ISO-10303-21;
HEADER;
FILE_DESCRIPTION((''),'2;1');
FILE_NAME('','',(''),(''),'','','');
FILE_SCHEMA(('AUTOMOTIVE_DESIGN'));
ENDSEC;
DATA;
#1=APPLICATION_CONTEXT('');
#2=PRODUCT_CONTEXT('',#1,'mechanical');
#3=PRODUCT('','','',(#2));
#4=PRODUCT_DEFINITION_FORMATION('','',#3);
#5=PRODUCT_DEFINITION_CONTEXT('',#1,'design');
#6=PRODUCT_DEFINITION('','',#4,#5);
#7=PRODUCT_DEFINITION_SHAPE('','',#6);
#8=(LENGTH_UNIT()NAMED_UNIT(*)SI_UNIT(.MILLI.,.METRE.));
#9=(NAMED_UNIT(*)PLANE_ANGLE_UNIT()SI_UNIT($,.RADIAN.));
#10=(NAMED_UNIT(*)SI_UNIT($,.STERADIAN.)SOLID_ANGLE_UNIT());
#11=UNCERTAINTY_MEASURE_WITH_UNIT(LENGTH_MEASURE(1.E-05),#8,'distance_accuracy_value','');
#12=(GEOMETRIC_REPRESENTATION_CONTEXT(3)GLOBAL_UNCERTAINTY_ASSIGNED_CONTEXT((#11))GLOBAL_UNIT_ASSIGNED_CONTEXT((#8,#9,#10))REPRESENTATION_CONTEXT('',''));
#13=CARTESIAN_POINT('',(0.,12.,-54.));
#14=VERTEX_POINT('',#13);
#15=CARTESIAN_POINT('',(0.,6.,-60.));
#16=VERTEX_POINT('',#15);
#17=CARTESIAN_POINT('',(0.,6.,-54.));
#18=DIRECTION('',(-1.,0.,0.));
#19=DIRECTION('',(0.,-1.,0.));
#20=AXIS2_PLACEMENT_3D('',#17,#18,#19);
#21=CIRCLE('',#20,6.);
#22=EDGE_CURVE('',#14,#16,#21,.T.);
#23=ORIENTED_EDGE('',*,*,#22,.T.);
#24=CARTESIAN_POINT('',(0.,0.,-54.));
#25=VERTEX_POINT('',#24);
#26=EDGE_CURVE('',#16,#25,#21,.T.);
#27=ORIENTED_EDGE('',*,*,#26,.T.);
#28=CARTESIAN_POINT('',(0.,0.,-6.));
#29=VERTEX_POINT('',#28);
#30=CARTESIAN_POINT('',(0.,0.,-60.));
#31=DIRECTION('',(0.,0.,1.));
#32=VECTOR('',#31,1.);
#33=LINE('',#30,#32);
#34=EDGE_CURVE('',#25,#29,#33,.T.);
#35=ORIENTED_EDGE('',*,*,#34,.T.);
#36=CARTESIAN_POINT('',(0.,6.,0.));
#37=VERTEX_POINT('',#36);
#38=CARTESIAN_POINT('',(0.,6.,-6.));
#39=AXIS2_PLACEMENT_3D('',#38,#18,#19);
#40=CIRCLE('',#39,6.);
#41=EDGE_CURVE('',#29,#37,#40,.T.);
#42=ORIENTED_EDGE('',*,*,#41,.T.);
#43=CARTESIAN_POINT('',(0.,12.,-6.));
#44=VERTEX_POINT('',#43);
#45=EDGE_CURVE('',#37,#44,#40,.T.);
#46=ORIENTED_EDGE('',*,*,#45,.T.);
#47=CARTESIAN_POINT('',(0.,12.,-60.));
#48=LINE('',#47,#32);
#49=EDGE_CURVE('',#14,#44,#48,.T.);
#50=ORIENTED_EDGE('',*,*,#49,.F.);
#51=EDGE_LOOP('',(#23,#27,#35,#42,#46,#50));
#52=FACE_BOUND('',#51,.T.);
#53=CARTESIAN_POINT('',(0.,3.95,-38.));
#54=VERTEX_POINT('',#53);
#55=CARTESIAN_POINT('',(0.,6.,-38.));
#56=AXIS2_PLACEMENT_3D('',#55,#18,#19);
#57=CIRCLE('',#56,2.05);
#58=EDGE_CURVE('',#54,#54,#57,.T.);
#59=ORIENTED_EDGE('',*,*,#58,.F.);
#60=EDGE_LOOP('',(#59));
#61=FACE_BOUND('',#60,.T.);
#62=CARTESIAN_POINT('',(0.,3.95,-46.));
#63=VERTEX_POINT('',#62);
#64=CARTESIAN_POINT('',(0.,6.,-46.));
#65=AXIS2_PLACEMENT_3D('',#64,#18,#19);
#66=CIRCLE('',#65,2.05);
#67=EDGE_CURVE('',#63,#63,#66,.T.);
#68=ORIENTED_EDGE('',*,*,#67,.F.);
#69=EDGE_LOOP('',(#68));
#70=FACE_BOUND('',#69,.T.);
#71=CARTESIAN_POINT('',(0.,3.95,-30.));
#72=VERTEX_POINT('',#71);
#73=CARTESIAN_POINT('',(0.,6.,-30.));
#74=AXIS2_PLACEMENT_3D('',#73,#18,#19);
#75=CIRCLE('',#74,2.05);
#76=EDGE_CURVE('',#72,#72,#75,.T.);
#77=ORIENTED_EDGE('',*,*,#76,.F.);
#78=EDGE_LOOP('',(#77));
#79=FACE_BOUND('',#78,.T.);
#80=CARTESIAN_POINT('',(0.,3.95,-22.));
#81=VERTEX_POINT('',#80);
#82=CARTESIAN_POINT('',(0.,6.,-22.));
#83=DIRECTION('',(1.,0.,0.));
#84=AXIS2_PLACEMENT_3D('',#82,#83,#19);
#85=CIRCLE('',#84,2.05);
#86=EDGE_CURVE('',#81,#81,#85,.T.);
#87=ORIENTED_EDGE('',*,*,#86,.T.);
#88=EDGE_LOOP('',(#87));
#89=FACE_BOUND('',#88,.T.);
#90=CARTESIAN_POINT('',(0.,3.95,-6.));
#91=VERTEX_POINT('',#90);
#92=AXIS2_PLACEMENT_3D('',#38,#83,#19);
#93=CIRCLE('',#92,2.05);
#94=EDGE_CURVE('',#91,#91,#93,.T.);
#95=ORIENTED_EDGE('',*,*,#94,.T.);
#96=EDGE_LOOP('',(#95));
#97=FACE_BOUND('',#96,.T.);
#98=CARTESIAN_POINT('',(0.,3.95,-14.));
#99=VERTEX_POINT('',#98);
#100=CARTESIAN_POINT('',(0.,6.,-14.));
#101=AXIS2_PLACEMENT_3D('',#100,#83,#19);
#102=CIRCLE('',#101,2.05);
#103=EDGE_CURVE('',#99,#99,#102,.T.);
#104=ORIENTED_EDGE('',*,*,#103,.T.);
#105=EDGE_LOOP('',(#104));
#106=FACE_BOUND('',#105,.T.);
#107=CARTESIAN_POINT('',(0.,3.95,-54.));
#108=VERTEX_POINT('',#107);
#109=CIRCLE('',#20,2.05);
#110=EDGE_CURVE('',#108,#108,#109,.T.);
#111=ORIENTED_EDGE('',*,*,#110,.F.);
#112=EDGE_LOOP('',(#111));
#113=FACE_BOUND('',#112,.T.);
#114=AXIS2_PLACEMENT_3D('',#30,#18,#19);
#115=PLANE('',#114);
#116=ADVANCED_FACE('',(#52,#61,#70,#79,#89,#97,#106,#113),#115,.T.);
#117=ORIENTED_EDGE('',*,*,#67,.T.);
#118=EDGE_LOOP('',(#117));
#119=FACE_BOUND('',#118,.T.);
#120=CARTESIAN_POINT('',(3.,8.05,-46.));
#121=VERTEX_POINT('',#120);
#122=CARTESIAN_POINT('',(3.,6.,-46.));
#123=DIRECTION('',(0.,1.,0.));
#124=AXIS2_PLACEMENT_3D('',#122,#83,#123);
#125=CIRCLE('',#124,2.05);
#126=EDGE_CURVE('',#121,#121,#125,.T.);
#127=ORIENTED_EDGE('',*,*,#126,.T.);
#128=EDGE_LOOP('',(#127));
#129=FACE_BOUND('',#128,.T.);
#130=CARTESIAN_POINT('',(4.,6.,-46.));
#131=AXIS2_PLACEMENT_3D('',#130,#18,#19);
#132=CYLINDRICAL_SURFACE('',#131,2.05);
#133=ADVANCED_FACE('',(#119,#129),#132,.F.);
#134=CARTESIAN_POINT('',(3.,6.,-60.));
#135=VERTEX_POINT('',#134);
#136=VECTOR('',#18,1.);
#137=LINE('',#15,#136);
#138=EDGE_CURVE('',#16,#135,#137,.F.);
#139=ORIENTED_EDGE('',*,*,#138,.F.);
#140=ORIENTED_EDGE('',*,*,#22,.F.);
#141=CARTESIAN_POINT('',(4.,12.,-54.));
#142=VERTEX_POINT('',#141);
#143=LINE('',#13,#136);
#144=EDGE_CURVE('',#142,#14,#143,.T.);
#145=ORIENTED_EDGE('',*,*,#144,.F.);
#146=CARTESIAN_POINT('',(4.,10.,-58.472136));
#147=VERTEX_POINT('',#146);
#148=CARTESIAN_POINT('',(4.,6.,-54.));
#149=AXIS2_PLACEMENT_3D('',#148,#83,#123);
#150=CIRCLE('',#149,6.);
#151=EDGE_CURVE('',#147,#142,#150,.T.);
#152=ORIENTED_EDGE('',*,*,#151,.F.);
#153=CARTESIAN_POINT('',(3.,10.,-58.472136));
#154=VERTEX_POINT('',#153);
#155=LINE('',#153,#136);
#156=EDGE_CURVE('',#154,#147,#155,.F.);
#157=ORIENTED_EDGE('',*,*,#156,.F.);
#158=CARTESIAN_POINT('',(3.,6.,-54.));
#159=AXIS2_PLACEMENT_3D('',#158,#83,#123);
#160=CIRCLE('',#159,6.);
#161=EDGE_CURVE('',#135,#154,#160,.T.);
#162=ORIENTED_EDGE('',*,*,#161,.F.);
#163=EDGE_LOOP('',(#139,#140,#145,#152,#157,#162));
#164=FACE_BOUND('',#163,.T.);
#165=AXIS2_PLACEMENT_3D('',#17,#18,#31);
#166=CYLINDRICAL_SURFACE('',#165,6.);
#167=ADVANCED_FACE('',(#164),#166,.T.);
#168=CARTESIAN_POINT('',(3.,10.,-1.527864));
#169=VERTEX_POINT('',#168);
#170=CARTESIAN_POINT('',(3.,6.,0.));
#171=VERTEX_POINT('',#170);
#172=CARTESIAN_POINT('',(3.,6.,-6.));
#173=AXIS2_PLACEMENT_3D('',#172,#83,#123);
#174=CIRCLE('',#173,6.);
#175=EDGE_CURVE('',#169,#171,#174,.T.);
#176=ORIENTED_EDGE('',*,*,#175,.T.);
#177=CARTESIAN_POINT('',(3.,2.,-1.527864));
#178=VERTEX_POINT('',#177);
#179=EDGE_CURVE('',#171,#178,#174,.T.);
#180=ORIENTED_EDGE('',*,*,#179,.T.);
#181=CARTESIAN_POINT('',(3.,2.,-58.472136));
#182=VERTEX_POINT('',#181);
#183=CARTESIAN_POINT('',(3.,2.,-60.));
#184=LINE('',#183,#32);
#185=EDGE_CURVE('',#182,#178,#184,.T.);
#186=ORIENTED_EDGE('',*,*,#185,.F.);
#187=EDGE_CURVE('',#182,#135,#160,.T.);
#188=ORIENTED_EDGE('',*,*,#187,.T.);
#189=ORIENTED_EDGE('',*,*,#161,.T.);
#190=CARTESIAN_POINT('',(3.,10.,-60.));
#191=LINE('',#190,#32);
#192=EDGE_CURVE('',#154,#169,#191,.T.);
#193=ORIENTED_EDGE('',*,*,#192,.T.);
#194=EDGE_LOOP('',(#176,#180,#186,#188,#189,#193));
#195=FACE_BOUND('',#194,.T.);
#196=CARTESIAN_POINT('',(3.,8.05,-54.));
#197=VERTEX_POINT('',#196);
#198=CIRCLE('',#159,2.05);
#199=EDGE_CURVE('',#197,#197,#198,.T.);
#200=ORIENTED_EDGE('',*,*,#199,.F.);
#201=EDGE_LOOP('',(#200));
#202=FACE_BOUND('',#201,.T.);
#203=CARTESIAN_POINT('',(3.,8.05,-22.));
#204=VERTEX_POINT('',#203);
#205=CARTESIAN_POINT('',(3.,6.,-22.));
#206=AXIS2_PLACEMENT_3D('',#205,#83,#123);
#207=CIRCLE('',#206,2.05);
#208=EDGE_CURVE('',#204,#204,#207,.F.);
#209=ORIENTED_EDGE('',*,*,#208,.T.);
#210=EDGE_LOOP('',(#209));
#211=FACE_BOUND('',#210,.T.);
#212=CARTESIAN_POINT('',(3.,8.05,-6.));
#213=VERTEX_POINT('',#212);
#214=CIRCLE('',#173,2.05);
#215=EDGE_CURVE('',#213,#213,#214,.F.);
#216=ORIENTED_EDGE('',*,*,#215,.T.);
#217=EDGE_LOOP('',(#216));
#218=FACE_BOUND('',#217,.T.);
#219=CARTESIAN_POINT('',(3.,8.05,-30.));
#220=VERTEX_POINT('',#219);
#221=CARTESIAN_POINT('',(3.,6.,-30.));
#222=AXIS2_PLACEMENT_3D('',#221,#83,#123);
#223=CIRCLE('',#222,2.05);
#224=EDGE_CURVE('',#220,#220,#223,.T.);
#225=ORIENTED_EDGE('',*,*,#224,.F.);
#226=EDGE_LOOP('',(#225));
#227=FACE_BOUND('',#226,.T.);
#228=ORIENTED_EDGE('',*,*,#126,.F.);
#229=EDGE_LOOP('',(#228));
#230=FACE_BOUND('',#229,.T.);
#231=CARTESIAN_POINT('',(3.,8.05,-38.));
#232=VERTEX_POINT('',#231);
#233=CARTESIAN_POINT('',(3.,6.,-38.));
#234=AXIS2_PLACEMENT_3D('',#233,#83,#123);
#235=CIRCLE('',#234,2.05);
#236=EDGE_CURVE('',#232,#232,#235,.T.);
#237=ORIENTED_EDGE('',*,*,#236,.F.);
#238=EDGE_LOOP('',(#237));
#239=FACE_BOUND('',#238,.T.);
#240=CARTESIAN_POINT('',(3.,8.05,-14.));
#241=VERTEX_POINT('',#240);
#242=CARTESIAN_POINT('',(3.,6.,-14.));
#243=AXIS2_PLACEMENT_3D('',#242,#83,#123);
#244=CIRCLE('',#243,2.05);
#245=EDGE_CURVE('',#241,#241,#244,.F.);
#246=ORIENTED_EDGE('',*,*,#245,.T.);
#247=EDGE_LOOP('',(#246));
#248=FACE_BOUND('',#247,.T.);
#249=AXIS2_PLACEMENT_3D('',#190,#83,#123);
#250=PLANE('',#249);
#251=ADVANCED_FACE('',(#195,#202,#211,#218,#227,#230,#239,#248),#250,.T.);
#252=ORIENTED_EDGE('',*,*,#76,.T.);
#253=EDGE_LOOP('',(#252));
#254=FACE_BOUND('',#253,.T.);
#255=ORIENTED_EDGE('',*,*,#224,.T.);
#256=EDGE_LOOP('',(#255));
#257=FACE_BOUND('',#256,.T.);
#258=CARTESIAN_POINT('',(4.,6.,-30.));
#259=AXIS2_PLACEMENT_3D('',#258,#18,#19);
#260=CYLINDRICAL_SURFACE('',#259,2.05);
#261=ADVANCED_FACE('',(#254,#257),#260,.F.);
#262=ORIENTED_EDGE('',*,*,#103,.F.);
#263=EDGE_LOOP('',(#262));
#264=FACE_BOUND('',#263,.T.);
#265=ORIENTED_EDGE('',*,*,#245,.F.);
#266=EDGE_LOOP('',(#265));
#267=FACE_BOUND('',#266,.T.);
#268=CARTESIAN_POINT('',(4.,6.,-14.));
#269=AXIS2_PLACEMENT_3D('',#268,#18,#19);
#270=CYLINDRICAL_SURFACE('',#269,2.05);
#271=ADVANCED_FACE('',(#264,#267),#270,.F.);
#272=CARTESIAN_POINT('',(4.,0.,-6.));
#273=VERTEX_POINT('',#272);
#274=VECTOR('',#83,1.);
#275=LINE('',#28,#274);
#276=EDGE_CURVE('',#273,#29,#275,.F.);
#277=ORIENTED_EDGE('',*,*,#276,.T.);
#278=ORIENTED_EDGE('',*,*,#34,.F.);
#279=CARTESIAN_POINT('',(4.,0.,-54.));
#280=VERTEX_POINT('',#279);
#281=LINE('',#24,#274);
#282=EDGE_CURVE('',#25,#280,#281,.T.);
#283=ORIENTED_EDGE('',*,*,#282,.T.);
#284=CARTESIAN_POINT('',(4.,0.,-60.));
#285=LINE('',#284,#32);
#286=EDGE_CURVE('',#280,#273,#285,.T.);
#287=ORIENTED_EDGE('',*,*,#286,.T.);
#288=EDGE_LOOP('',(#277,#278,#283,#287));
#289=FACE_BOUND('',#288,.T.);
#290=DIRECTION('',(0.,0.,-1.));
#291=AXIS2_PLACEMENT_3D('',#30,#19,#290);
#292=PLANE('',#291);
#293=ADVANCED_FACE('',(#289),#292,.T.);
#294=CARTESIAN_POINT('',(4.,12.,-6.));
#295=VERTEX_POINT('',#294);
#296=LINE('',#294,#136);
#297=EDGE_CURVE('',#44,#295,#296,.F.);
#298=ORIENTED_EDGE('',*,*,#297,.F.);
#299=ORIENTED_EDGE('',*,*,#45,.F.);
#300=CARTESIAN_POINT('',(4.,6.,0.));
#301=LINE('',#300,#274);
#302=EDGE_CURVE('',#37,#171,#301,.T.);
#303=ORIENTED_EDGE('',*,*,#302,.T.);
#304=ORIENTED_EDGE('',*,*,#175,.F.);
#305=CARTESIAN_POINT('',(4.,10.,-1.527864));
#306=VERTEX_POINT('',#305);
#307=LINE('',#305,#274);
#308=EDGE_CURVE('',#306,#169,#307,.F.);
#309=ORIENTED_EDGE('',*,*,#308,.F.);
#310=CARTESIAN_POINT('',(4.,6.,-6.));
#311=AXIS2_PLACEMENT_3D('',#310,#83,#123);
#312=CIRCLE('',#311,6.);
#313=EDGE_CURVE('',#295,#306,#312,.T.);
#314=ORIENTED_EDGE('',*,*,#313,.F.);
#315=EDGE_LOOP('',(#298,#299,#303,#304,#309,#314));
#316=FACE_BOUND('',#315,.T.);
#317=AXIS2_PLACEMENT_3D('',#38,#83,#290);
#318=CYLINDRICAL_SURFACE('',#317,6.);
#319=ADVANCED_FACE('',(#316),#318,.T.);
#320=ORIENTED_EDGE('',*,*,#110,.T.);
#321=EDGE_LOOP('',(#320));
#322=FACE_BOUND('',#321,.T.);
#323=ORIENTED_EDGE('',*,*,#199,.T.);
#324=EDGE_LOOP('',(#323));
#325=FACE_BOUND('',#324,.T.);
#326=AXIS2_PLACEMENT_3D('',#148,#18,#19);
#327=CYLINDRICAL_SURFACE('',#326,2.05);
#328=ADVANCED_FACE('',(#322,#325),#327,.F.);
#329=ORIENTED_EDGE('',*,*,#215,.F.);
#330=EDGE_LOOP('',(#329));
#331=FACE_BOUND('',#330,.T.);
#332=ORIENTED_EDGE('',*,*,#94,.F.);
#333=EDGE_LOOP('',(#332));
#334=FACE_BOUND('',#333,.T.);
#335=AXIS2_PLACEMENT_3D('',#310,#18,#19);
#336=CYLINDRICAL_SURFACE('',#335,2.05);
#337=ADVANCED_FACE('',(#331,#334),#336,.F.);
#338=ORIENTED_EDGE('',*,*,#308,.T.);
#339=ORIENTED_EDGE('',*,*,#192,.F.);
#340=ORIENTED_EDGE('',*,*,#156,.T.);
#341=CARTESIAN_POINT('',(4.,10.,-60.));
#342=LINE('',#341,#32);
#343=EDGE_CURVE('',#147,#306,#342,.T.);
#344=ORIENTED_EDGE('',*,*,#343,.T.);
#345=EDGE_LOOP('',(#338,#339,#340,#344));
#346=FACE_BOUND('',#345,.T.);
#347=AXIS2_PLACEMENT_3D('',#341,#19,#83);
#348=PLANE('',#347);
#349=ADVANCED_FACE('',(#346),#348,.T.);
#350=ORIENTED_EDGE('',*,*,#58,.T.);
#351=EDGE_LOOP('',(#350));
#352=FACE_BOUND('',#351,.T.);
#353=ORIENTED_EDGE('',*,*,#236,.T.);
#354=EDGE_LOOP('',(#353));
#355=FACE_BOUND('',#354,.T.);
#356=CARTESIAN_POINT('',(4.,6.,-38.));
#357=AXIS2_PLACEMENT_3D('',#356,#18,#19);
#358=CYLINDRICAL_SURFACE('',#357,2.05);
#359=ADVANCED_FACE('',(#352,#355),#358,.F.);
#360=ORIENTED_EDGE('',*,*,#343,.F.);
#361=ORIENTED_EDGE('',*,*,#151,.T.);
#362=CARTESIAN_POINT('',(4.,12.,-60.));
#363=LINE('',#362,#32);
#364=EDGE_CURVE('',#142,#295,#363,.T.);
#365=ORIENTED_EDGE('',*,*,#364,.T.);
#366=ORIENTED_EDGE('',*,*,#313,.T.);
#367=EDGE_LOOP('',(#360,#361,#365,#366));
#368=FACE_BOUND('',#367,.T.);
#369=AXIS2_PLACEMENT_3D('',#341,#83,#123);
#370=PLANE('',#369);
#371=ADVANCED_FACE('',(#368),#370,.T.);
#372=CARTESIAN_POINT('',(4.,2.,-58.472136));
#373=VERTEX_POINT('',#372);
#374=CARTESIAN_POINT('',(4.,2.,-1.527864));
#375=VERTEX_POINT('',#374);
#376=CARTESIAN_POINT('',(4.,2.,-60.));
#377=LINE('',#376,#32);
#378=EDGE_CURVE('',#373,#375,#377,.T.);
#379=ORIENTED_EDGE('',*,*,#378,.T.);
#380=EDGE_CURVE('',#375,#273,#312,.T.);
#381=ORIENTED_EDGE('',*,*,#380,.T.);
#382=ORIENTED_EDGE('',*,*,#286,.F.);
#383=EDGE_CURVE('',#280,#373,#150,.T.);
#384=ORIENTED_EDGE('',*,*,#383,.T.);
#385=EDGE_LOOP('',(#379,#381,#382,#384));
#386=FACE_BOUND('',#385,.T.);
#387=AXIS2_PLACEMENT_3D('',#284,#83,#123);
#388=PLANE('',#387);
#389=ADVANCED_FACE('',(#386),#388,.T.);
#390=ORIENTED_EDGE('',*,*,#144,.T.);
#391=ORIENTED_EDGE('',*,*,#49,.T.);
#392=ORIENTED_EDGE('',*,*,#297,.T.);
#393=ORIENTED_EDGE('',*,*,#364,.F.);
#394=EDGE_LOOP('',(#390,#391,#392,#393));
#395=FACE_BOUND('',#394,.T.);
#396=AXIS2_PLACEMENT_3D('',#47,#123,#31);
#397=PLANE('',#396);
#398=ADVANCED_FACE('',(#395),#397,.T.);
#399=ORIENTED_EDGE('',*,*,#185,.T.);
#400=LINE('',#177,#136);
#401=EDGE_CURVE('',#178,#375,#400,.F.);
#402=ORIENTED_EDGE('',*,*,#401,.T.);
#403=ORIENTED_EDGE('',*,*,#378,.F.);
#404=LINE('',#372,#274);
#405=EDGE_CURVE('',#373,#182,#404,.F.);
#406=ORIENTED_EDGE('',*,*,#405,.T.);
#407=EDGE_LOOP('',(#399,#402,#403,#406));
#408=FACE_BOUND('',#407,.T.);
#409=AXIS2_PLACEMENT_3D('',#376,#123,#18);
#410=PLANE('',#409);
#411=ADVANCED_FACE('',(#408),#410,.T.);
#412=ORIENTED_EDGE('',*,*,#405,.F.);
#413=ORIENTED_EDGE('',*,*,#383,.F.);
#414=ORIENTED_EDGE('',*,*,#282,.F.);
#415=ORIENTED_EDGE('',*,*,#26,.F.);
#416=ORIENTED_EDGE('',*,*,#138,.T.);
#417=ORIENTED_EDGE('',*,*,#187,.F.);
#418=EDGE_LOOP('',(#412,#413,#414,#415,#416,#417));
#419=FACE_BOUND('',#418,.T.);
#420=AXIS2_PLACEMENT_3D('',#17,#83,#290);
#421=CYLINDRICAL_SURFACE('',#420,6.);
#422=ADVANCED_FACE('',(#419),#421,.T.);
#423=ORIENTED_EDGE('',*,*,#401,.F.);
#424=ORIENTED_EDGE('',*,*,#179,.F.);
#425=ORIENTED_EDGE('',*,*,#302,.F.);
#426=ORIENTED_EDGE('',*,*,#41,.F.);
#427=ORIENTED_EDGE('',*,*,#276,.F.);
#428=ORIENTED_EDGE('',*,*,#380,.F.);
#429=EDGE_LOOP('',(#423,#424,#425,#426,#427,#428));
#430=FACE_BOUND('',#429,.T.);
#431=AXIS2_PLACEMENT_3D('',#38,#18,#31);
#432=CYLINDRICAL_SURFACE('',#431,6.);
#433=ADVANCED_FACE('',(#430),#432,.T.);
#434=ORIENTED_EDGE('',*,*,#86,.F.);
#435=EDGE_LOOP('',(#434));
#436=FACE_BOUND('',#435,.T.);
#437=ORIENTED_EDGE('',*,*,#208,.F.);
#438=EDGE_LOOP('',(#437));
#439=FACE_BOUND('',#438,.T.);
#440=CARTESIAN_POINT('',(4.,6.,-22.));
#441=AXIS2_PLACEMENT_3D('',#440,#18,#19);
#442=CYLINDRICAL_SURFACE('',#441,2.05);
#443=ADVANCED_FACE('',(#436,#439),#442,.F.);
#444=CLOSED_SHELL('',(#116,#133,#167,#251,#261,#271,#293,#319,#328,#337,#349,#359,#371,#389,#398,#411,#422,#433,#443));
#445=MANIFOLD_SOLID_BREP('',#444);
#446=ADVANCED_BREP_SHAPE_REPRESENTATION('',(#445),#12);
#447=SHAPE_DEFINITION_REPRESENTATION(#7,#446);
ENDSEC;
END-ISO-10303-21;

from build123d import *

# Parameters (mm, degrees)
BOSS_EXTRUDE1_DEPTH     = 60
FILLET1_R               = 6
SKETCH2_R               = 2.05
CUT_EXTRUDE1_DEPTH      = 62.318838867
LPATTERN1_COUNT         = 4
LPATTERN1_PITCH         = 8
MIRROR1_COPY_1_SKETCH_R = 2.05
MIRROR1_COPY_1_DEPTH    = 62.318838867
MIRROR1_COPY_2_SKETCH_R = 2.05
MIRROR1_COPY_2_DEPTH    = 62.318838867
MIRROR1_COPY_3_SKETCH_R = 2.05
MIRROR1_COPY_3_DEPTH    = 62.318838867


with BuildPart() as part:
    # Sketch1 → Boss-Extrude1 (new body)
    with BuildSketch(Plane.XY):
        Polygon((0, 0), (4, 0), (4, 2), (3, 2), (3, 10), (4, 10), (4, 12), (0, 12), align=None)
    extrude(amount=-BOSS_EXTRUDE1_DEPTH)

    # Fillet1
    fillet1_edges = [part.edges().sort_by_distance(p)[0] for p in [
        (2, 12, 0),
        (2, 0, 0),
        (2, 0, -60),
        (2, 12, -60),
    ]]
    fillet(fillet1_edges, radius=FILLET1_R - 0.0001)  # a hair under: the kernel refuses the full size

    # Sketch2 → Cut-Extrude1 (cut, through all)
    with BuildSketch(Plane.ZY):
        with Locations(Location((-54, 6, 0), (0, 0, 270))):
            Circle(SKETCH2_R)
    cut_extrude1 = extrude(amount=-CUT_EXTRUDE1_DEPTH, mode=Mode.SUBTRACT)

    # LPattern1: Cut-Extrude1 ×4
    with Locations(*[(0, 0, i * LPATTERN1_PITCH) for i in range(1, LPATTERN1_COUNT)]):
        add(cut_extrude1, mode=Mode.SUBTRACT)

    # Mirror1: Cut-Extrude1 across plane
    add(cut_extrude1.mirror(Plane.XY.offset(-30)), mode=Mode.SUBTRACT)

    # Mirror1 copy 1 sketch → Mirror1 copy 1 (cut, through all)
    with BuildSketch(Plane(origin=(0, 0, -68), x_dir=(0, 0, -1), z_dir=(-1, 0, 0))):
        with Locations((-54, -6)):
            Circle(MIRROR1_COPY_1_SKETCH_R)
    extrude(amount=-MIRROR1_COPY_1_DEPTH, mode=Mode.SUBTRACT)

    # Mirror1 copy 2 sketch → Mirror1 copy 2 (cut, through all)
    with BuildSketch(Plane(origin=(0, 0, -76), x_dir=(0, 0, -1), z_dir=(-1, 0, 0))):
        with Locations((-54, -6)):
            Circle(MIRROR1_COPY_2_SKETCH_R)
    extrude(amount=-MIRROR1_COPY_2_DEPTH, mode=Mode.SUBTRACT)

    # Mirror1 copy 3 sketch → Mirror1 copy 3 (cut, through all)
    with BuildSketch(Plane(origin=(0, 0, -84), x_dir=(0, 0, -1), z_dir=(-1, 0, 0))):
        with Locations((-54, -6)):
            Circle(MIRROR1_COPY_3_SKETCH_R)
    extrude(amount=-MIRROR1_COPY_3_DEPTH, mode=Mode.SUBTRACT)


solid = part.part
